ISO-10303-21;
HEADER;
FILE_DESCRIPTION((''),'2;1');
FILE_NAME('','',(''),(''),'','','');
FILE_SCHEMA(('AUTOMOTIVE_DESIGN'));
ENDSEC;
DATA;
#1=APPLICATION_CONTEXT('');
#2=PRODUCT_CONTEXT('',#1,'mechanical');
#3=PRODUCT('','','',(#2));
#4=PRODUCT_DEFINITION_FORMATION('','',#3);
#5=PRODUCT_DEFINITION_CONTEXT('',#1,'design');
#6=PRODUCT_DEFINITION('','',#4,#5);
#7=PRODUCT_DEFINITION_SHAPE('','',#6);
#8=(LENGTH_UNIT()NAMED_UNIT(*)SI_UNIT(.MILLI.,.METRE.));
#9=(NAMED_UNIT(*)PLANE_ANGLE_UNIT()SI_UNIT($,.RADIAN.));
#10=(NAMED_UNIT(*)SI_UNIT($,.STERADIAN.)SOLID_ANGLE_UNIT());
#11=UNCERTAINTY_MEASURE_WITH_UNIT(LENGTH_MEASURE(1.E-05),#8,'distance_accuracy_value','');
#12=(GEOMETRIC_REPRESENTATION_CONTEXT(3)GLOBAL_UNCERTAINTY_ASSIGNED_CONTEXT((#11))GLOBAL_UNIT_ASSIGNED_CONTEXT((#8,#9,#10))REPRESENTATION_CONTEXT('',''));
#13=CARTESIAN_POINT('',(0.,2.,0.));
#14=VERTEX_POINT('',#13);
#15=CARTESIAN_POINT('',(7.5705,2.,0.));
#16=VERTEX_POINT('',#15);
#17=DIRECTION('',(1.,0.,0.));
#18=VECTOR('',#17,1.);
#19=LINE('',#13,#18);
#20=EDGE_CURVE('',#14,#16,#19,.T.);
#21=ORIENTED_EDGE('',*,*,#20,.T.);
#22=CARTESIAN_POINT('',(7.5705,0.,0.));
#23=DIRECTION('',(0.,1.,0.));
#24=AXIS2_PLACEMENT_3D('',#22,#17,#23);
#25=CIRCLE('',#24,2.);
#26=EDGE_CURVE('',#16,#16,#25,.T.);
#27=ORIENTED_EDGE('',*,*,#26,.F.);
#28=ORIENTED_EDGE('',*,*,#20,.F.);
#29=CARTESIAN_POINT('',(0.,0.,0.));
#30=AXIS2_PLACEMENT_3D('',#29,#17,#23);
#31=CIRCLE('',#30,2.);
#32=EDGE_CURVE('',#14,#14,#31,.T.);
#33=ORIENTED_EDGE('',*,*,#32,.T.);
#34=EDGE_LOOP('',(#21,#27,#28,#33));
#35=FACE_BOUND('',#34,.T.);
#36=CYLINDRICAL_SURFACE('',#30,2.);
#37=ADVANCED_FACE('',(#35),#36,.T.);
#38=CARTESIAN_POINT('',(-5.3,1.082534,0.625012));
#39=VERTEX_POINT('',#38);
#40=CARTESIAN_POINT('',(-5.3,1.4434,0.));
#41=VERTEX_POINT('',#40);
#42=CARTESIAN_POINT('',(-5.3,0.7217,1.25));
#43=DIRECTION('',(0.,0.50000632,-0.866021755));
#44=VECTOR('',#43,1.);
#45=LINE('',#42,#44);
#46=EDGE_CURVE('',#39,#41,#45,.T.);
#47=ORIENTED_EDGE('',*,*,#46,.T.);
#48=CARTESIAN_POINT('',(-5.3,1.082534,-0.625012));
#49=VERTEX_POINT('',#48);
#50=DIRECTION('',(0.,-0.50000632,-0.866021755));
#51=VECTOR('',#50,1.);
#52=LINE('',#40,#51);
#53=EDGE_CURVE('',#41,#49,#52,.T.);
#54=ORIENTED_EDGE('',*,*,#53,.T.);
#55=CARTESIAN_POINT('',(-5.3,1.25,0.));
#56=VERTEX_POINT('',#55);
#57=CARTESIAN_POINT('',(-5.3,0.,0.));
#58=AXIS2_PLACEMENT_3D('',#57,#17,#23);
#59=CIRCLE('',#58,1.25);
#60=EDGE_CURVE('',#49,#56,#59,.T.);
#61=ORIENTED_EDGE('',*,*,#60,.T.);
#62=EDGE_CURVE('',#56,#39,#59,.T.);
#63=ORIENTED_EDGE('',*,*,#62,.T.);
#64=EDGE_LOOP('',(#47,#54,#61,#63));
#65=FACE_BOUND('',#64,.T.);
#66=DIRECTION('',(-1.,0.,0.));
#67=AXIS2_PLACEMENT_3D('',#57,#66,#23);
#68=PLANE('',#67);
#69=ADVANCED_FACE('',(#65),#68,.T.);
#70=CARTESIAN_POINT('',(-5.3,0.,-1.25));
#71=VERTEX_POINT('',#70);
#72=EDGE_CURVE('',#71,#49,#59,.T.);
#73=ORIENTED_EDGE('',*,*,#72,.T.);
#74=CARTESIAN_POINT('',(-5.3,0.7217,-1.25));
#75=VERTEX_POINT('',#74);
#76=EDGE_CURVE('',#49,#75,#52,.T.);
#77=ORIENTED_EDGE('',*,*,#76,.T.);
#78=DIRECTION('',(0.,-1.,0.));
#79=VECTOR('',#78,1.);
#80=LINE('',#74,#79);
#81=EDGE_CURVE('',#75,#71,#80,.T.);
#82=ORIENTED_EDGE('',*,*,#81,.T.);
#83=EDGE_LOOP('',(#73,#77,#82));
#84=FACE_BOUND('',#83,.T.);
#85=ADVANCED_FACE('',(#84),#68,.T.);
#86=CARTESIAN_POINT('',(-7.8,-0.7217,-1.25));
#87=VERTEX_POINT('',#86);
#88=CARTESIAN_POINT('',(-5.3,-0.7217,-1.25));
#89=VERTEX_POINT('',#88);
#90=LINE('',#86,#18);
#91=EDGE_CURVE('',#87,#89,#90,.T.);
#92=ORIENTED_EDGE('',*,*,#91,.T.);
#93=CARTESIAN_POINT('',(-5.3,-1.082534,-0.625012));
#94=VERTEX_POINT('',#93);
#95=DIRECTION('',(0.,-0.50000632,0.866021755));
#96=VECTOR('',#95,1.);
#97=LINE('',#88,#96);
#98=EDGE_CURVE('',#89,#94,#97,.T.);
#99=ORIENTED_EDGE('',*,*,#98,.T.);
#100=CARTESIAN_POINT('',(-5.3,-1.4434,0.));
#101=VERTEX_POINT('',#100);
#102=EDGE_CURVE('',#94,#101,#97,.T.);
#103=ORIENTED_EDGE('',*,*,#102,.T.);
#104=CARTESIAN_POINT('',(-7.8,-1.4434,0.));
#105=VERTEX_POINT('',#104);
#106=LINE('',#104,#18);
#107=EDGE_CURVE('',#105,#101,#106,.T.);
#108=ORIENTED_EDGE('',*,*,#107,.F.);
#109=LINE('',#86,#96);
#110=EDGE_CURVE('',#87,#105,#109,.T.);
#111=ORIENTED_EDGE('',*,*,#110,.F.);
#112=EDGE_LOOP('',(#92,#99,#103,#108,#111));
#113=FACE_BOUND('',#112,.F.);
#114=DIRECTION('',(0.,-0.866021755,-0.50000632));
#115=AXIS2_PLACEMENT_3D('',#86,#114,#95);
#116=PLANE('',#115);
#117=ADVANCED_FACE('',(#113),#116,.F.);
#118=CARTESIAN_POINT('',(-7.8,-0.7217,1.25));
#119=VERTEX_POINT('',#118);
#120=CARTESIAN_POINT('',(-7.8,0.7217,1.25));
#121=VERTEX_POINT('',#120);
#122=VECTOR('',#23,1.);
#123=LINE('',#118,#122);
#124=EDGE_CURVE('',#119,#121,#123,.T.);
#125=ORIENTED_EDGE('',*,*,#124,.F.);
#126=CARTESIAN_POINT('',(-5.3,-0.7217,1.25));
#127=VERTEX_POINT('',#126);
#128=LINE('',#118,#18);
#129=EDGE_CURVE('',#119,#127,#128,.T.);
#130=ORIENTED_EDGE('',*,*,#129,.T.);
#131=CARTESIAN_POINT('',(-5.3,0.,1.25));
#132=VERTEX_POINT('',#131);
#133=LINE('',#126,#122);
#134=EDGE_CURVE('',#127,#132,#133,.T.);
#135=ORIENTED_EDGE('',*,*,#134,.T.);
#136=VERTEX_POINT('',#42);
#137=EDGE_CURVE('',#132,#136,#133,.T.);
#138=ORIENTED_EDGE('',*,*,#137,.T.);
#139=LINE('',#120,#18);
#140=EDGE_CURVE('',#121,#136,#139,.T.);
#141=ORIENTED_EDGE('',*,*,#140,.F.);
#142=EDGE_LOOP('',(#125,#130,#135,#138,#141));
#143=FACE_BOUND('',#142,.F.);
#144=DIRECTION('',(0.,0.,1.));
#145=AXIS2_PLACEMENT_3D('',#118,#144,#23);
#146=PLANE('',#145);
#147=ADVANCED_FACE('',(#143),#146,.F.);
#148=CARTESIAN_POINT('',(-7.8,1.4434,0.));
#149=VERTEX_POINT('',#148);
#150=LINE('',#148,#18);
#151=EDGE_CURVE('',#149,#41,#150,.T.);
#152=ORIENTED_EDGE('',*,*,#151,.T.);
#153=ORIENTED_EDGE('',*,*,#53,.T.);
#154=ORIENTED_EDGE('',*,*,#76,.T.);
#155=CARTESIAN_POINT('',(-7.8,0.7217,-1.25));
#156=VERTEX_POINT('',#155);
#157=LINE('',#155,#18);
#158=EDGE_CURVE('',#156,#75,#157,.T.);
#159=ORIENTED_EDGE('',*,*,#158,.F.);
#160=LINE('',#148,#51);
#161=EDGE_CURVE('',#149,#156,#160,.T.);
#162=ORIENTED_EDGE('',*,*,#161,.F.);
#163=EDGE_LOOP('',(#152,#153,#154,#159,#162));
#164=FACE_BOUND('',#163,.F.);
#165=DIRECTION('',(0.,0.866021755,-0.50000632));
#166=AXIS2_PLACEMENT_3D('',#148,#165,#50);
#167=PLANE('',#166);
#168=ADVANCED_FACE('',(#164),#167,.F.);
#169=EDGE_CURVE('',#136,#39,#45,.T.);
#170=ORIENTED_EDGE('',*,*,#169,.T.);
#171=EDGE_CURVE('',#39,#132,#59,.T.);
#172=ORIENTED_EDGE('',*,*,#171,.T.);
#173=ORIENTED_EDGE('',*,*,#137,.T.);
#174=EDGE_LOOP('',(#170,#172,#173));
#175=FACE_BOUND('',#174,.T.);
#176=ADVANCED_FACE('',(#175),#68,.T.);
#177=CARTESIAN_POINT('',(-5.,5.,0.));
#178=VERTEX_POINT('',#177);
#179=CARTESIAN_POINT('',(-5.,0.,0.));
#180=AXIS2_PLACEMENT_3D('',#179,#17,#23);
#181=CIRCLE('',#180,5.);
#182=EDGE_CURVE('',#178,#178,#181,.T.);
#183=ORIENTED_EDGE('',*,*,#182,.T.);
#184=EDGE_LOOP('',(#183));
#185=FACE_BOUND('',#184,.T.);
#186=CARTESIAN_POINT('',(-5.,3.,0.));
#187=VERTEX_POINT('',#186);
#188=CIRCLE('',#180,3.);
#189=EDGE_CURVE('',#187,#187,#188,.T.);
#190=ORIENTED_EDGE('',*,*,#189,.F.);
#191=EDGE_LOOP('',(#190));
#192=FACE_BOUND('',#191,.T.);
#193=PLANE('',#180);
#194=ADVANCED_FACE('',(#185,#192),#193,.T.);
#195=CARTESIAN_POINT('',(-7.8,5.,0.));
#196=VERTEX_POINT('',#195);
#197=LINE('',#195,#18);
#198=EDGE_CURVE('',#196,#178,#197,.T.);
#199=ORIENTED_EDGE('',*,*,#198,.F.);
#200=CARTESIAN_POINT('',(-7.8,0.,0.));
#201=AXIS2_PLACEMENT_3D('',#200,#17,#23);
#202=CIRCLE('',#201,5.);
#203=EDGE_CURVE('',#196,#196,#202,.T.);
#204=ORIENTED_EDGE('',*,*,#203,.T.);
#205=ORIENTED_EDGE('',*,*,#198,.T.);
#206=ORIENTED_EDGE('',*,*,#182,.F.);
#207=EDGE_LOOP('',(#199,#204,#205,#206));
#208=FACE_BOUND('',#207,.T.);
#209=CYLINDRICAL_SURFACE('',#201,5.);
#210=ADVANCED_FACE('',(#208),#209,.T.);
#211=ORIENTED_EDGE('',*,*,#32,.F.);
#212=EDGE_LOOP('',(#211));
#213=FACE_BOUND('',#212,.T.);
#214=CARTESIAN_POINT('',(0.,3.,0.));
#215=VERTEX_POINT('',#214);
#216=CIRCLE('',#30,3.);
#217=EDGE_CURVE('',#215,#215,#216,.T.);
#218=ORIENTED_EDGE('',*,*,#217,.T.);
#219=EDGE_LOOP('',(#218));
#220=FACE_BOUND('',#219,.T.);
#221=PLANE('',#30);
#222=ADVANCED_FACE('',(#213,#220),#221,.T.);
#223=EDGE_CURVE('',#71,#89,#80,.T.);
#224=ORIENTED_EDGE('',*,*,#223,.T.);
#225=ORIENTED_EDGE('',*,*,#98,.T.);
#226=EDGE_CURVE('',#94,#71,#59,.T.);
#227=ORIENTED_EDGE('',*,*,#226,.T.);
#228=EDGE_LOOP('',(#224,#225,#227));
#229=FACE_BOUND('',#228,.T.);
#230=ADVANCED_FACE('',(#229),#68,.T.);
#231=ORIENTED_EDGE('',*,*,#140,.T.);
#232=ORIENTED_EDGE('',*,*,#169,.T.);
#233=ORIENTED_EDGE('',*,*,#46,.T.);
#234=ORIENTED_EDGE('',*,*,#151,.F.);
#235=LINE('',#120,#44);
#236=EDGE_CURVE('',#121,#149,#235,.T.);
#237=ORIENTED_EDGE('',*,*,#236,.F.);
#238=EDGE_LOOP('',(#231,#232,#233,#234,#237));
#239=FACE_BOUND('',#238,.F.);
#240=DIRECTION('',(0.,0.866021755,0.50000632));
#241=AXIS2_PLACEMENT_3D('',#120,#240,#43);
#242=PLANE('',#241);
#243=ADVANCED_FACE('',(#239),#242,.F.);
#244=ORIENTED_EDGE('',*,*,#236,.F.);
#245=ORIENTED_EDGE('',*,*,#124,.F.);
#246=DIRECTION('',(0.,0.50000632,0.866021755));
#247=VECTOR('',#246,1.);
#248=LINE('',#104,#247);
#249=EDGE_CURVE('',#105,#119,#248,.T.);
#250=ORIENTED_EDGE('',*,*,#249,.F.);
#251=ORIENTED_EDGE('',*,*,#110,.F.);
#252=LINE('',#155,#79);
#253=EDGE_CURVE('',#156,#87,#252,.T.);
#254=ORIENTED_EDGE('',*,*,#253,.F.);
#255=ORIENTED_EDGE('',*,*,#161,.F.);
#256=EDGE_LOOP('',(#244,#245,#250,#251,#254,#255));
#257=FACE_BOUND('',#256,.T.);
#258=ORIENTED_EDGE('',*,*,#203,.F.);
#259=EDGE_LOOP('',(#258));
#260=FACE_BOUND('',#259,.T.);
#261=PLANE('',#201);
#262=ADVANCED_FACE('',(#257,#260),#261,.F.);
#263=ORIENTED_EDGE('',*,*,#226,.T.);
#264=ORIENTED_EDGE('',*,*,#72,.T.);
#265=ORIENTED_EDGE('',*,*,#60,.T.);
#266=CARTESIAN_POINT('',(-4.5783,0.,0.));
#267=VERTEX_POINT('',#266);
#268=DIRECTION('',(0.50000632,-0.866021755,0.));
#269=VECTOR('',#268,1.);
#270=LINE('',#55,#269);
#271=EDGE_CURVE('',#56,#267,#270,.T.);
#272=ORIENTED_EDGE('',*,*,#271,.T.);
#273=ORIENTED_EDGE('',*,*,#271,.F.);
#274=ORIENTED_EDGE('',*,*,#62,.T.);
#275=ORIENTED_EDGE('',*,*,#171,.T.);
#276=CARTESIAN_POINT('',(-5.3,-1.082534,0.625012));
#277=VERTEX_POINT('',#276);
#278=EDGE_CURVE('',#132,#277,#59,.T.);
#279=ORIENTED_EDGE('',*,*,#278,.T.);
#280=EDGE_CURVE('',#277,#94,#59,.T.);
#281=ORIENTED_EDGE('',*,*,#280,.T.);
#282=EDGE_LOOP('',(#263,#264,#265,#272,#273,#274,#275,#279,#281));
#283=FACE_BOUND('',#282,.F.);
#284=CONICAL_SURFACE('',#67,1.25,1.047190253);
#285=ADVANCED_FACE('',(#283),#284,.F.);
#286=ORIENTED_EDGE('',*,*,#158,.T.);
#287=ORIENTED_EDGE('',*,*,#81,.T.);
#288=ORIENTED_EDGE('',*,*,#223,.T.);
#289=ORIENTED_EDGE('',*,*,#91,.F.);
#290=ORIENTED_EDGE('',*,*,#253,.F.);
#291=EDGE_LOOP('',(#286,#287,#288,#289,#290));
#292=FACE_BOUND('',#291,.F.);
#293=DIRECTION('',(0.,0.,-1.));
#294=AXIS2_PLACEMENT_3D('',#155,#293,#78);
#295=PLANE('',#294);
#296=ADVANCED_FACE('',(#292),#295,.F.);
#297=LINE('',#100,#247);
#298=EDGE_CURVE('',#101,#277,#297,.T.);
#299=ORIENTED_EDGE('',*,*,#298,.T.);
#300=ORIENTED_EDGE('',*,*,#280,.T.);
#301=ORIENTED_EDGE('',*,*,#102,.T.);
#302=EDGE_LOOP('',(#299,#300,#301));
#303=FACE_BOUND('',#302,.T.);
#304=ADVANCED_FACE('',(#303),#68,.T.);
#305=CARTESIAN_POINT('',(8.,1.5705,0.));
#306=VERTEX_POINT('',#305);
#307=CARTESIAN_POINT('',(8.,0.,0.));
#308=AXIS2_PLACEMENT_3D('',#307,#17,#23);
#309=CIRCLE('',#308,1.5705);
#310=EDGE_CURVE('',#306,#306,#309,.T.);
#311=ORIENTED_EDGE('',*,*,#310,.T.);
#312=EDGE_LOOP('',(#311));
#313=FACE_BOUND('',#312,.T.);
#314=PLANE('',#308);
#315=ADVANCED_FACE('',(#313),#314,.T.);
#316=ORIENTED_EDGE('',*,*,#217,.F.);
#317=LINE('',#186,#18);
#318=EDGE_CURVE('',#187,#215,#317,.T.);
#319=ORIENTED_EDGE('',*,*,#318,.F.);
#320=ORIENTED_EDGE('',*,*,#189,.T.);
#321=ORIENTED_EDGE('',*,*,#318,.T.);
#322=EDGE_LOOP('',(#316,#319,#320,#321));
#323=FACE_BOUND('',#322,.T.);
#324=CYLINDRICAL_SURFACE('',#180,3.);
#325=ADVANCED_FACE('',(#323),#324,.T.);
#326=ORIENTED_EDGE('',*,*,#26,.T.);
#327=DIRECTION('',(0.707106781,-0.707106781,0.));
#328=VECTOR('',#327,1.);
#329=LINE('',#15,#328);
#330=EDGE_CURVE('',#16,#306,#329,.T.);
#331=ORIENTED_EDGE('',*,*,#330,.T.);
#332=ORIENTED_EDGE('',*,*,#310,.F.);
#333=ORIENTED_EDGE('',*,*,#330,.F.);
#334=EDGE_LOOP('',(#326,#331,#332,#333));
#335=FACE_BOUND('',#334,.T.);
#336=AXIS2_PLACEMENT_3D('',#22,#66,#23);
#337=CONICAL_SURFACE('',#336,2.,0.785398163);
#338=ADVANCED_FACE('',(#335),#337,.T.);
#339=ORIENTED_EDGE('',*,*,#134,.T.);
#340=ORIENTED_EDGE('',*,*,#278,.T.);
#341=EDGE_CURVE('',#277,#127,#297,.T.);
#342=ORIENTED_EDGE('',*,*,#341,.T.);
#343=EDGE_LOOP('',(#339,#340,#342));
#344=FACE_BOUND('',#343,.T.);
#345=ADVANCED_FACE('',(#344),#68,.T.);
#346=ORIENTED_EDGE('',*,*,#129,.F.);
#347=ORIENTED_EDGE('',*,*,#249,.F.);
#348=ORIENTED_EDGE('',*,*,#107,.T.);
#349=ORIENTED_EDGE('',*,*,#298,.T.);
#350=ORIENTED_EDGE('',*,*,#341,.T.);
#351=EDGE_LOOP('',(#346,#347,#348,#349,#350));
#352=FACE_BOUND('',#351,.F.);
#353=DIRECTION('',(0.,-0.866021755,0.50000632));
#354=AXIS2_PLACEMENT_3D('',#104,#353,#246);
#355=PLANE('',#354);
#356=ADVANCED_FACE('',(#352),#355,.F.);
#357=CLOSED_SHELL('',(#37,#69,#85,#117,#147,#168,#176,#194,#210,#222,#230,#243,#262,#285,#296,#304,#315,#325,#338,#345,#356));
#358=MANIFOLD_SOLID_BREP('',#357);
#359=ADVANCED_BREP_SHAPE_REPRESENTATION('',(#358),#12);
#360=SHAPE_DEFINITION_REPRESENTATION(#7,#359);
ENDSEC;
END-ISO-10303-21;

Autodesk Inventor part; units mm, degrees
ref_plane "YZ Plane" through (0, 0, 0) normal (1, 0, 0) x (0, 1, 0)
ref_plane "XZ Plane" through (0, 0, 0) normal (0, 1, 0) x (-1, 0, 0)
ref_plane "XY Plane" through (0, 0, 0) normal (0, 0, 1) x (1, 0, 0)
sketch "Sketch_1" plane through (0, 0, 0) normal (0, 0, 1) x (1, 0, 0)
  line L0 (8, 0) -> (-7.8, 0)
  line L1 (-7.8, 0) -> (-7.8, 5)
  line L2 (-7.8, 5) -> (-5, 5)
  line L3 (-5, 5) -> (-5, 3)
  line L4 (-5, 3) -> (0, 3)
  line L5 (0, 3) -> (0, 2)
  line L6 (0, 2) -> (7.5705, 2)
  line L7 (7.5705, 2) -> (8, 1.5705)
  line L8 (8, 1.5705) -> (8, 0)
  line L9 (8, 0) -> (-7.8, 0)
revolve "Revolution1" add sketch "Sketch_1" angle 360 about axis through (8, 0, 0) along (1, 0, 0)
thread "Thread1" size "M4x0.7" class "6g" standard "ISO Metric profile" length 6.3705
sketch "Sketch_2" plane through (-7.8, 0, 0) normal (-1, 0, 0) x (0, 1, 0)
  line L0 (-1.4434, 0) -> (-0.7217, -1.25)
  line L1 (-0.7217, -1.25) -> (0.7217, -1.25)
  line L2 (0.7217, -1.25) -> (1.4434, 0)
  line L3 (1.4434, 0) -> (0.7217, 1.25)
  line L4 (0.7217, 1.25) -> (-0.7217, 1.25)
  line L5 (-0.7217, 1.25) -> (-1.4434, 0)
extrude "Extrusion1" cut sketch "Sketch_2" against normal blind 2.5
sketch "Sketch_3" plane through (0, 0, 0) normal (0, 0, 1) x (1, 0, 0)
  line L0 (-4.5783, 0) -> (-5.3, 0)
  line L1 (-5.3, 0) -> (-5.3, 1.25)
  line L2 (-5.3, 1.25) -> (-4.5783, 0)
  line L3 (-4.5783, 0) -> (-5.3, 0)
revolve "Revolution2" cut sketch "Sketch_3" angle 360 about axis through (-4.5783, 0, 0) along (1, 0, 0)
properties part number "DBSY4-5-8" material "스테인리스스틸"
